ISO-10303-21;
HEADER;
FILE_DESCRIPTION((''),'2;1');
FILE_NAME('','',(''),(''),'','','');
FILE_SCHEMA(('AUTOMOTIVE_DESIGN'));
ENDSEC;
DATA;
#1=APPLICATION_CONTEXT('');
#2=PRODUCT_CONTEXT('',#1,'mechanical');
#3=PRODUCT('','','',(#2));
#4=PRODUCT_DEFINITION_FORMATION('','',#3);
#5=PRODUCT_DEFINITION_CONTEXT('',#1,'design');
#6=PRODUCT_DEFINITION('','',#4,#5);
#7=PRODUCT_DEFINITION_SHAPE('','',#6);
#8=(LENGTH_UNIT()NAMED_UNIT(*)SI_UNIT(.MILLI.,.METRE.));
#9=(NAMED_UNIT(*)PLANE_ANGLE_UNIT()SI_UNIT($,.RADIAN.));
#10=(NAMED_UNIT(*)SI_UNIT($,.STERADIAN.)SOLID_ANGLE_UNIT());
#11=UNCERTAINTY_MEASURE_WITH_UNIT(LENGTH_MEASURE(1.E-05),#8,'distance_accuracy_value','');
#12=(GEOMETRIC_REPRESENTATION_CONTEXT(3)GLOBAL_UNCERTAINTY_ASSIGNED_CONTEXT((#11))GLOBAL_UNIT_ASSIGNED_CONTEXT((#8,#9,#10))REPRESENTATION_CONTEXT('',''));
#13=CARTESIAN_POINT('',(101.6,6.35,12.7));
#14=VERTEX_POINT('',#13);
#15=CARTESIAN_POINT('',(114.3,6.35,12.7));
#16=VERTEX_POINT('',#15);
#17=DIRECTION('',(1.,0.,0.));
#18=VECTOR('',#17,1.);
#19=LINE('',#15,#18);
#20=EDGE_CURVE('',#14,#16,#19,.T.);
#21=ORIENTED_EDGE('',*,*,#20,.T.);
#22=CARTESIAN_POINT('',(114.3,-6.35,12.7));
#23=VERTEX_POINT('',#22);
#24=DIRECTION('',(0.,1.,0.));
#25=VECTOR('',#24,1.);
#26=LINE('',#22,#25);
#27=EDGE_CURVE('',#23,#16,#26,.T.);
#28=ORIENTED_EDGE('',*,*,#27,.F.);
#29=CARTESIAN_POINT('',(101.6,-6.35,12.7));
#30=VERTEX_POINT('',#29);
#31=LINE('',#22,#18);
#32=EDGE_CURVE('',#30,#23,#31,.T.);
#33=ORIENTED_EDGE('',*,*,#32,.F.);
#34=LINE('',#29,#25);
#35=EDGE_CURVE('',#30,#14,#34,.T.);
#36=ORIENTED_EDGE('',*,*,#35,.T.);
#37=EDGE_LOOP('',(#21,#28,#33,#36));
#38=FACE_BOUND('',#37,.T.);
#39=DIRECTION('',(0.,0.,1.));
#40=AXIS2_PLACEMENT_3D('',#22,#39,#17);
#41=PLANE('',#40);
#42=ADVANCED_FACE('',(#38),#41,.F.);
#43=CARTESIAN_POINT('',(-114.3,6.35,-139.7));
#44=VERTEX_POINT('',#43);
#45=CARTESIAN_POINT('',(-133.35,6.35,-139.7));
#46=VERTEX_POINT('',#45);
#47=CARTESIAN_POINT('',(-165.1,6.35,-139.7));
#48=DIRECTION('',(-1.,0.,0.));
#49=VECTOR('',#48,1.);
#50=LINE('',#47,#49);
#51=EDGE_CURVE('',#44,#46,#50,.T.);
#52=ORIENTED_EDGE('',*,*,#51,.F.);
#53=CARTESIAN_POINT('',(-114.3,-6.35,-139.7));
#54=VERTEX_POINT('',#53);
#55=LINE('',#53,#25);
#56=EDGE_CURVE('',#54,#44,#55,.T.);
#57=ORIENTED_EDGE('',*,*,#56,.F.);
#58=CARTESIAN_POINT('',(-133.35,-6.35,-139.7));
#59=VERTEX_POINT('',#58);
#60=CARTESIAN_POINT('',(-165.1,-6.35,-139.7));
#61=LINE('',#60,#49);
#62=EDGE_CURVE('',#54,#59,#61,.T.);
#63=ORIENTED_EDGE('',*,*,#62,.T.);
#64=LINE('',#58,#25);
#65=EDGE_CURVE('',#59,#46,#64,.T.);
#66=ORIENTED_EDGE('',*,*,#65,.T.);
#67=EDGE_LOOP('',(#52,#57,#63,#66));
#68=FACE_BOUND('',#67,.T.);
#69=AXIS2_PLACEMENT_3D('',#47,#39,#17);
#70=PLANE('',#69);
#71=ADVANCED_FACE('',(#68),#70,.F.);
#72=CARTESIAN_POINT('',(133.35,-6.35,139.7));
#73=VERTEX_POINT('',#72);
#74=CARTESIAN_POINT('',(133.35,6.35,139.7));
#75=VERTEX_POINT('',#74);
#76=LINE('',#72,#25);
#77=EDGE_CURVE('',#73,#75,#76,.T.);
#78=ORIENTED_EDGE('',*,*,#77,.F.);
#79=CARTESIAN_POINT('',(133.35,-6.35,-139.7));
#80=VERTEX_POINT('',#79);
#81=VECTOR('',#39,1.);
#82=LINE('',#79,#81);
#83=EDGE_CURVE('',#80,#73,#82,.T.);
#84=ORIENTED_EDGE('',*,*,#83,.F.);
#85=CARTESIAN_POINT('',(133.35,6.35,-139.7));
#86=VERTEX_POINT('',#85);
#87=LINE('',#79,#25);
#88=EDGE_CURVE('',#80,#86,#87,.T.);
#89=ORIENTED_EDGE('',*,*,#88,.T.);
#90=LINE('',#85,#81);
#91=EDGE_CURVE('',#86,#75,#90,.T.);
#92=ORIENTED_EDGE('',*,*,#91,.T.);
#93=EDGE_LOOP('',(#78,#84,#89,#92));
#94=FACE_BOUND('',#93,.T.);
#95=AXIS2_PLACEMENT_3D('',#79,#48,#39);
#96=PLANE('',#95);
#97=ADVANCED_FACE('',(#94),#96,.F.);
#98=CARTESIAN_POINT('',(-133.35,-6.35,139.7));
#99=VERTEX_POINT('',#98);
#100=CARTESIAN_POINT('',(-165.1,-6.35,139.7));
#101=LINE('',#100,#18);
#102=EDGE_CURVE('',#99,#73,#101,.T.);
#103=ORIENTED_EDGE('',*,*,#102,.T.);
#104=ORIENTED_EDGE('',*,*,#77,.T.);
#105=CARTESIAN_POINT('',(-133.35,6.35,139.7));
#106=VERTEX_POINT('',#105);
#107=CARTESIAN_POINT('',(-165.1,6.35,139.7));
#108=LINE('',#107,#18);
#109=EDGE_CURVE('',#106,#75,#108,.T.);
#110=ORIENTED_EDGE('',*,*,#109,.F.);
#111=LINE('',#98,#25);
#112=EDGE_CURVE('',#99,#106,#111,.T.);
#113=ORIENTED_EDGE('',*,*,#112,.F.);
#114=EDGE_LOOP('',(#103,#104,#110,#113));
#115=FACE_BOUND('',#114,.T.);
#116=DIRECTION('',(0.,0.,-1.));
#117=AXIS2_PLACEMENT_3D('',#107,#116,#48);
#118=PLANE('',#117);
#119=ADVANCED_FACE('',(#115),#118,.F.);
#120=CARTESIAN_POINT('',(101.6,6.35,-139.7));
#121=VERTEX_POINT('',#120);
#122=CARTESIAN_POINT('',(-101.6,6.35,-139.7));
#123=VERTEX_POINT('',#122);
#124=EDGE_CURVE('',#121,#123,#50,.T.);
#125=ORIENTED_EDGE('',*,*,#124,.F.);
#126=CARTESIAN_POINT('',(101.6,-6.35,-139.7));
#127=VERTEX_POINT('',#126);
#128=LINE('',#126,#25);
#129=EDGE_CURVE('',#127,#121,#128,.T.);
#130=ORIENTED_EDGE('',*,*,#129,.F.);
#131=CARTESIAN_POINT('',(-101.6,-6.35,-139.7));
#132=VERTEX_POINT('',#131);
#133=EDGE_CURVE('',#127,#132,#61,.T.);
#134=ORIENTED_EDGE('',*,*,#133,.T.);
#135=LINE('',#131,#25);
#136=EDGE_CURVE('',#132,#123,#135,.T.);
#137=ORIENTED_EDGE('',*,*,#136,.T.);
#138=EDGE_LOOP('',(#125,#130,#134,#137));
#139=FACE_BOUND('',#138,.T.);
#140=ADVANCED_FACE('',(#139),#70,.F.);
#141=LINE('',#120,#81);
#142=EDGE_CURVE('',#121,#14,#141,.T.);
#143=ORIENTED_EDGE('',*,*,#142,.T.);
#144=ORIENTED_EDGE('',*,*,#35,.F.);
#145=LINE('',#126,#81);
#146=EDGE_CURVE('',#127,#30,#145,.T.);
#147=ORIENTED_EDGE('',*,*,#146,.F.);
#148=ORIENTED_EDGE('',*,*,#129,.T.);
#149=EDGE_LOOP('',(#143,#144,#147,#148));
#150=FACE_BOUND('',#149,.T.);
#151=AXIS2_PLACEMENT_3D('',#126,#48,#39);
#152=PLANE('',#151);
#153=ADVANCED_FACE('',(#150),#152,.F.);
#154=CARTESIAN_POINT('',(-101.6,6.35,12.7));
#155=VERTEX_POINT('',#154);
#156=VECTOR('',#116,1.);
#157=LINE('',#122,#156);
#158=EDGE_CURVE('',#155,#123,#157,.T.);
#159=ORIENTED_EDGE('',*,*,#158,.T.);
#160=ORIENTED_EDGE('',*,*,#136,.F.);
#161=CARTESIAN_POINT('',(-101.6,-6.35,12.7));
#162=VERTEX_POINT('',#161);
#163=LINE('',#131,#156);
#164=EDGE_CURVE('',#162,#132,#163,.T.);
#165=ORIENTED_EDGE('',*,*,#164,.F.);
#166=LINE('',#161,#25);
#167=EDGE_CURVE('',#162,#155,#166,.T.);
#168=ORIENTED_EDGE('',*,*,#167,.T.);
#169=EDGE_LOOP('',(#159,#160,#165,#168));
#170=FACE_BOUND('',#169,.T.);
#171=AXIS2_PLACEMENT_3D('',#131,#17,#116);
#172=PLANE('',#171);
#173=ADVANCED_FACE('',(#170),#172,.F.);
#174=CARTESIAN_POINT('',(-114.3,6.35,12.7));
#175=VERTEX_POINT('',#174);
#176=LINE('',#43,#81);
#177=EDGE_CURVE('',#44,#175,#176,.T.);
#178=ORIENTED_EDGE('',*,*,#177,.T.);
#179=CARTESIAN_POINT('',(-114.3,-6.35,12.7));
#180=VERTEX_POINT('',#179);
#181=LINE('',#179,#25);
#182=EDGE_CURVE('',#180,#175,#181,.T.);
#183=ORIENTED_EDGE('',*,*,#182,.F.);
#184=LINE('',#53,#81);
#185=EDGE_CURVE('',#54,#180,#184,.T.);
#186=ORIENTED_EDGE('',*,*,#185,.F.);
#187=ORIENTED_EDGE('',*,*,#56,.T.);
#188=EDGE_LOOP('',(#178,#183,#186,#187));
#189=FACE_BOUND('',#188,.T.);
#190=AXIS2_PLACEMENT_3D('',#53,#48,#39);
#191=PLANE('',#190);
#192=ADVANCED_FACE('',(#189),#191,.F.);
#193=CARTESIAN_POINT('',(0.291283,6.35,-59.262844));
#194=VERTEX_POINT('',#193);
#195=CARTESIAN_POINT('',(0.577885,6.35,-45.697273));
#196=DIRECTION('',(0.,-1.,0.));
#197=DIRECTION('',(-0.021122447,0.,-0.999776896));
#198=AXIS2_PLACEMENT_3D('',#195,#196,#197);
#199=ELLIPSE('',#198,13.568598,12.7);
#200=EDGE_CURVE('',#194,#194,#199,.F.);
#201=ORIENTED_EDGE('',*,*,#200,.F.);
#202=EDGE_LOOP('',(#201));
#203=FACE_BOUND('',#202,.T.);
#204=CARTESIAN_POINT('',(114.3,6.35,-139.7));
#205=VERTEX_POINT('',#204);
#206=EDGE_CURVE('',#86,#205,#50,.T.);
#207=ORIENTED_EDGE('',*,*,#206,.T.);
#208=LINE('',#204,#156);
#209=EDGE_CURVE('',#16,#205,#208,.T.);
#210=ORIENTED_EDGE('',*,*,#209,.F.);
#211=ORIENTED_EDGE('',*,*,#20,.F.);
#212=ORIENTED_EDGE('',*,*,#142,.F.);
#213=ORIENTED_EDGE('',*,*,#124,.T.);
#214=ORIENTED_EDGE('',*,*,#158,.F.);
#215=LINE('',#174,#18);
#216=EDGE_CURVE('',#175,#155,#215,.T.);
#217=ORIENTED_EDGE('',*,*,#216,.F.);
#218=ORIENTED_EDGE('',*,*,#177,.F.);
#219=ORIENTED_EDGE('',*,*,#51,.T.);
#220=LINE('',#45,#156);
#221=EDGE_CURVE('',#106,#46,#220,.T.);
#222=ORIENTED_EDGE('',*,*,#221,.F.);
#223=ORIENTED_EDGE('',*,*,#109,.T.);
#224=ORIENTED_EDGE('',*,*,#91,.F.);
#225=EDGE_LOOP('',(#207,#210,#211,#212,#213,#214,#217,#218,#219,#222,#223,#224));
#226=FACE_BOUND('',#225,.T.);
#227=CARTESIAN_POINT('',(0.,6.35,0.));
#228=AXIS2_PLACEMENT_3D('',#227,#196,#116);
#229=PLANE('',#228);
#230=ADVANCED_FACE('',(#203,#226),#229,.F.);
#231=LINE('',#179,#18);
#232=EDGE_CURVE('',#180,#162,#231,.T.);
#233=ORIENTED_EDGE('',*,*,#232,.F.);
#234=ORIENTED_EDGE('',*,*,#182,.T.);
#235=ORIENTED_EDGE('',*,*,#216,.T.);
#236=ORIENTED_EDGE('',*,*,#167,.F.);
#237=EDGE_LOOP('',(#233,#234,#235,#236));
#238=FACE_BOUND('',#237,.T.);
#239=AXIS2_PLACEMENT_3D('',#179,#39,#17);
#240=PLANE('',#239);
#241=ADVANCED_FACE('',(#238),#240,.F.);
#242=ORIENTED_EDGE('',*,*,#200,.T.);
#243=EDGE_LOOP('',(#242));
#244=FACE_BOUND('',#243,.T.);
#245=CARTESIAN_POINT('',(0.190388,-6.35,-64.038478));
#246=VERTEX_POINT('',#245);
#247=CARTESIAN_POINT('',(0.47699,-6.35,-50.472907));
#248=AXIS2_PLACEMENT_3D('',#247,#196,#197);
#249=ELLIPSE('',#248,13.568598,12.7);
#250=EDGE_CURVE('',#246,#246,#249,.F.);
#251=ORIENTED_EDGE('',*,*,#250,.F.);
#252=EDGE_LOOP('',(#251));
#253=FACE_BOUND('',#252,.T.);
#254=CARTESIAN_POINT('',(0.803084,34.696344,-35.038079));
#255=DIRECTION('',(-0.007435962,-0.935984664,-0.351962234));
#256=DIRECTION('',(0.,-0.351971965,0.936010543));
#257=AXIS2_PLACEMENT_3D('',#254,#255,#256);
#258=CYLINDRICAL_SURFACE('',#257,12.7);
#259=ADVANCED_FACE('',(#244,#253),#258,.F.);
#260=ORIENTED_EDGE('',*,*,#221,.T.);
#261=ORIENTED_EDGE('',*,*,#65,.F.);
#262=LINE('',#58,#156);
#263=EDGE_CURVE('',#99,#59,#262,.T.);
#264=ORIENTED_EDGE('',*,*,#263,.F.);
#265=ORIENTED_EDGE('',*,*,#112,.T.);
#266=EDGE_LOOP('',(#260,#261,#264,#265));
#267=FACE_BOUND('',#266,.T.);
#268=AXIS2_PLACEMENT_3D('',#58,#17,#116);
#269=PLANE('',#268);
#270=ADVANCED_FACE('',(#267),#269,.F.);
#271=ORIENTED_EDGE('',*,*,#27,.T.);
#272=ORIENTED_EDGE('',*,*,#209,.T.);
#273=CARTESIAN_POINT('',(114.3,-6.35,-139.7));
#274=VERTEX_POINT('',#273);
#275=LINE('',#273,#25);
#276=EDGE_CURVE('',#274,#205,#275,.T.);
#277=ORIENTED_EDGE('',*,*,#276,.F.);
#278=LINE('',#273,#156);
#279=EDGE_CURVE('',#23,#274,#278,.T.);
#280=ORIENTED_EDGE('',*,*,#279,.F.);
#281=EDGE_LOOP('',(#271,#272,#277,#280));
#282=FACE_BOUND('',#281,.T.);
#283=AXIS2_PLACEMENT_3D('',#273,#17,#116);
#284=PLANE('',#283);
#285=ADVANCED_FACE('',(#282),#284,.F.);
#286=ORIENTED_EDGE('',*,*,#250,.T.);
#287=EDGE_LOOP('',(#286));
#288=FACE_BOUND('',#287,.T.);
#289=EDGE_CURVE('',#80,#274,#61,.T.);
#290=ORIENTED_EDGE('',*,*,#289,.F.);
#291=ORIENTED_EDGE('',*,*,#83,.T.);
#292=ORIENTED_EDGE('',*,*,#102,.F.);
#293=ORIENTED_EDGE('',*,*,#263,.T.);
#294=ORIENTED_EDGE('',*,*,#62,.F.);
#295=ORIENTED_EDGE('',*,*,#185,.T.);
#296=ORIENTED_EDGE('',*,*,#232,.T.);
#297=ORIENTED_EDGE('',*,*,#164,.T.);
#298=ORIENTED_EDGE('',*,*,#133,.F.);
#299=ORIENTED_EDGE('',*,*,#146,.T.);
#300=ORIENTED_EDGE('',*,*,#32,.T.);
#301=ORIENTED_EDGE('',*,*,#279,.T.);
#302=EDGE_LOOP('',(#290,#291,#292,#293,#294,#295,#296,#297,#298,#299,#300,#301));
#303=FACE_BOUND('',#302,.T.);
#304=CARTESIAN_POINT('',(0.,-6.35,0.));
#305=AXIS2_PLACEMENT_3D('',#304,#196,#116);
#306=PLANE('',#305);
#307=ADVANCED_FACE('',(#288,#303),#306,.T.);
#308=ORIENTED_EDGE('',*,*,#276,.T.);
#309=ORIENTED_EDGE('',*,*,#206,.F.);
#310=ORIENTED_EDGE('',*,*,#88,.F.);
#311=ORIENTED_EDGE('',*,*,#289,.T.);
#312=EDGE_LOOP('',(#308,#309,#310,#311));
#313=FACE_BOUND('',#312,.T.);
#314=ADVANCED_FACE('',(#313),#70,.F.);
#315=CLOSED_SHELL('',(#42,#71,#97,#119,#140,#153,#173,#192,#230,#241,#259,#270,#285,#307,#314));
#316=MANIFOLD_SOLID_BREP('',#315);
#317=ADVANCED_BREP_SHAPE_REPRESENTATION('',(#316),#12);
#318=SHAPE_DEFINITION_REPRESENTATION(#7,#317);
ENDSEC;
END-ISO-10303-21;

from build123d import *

# Parameters (mm, degrees)
SKETCH1_W           = 330.2
SKETCH1_H           = 279.4
BOSS_EXTRUDE1_DEPTH = 6.35
SKETCH2_W           = 12.7
SKETCH2_H           = 152.4
CUT_EXTRUDE1_DEPTH  = 217.645770787
SKETCH4_W           = 31.75
SKETCH4_H           = 279.4
CUT_EXTRUDE3_DEPTH  = 217.645770787
CAVITY1_START       = -28.48121296
CAVITY1_OUTLINE_R   = 12.7
CAVITY1_DEPTH       = 23.121998378


# Read off the part's stored shape, not the designer's step: Cavity1
with BuildPart() as part:
    # Sketch1 → Boss-Extrude1 (new, symmetric)
    with BuildSketch(Plane(origin=(0, 0, 0), x_dir=(1, 0, 0), z_dir=(0, 1, 0))):
        Rectangle(SKETCH1_W, SKETCH1_H)
    extrude(amount=BOSS_EXTRUDE1_DEPTH, both=True)

    # Sketch2 → Cut-Extrude1 (cut, through all)
    with BuildSketch(Plane(origin=(0, 6.35, 0), x_dir=(1, 0, 0), z_dir=(0, 1, 0))):
        with Locations((-107.95, 63.5)):
            Rectangle(SKETCH2_W, SKETCH2_H)
        with Locations((107.95, 63.5)):
            Rectangle(SKETCH2_W, SKETCH2_H)
    extrude(amount=-CUT_EXTRUDE1_DEPTH, mode=Mode.SUBTRACT)

    # Sketch4 → Cut-Extrude3 (cut, through all)
    with BuildSketch(Plane(origin=(0, 6.35, 0), x_dir=(1, 0, 0), z_dir=(0, 1, 0))):
        with Locations((-149.225, 0)):
            Rectangle(SKETCH4_W, SKETCH4_H)
        with Locations((149.225, 0)):
            Rectangle(SKETCH4_W, SKETCH4_H)
    extrude(amount=-CUT_EXTRUDE3_DEPTH, mode=Mode.SUBTRACT)

    # Cavity1 outline → Cavity1 (cut)
    with BuildSketch(Plane(origin=(0, 0, 0), x_dir=(0.999972352848875, -0.006960139267425278, -0.0026172503248496305), z_dir=(0.007435962471992497, 0.9359846644758757, 0.3519622342355749)).offset(CAVITY1_START)):
        with Locations((0.653273782, 45.008151356)):
            Circle(CAVITY1_OUTLINE_R)
    extrude(amount=CAVITY1_DEPTH, mode=Mode.SUBTRACT)


solid = part.part
